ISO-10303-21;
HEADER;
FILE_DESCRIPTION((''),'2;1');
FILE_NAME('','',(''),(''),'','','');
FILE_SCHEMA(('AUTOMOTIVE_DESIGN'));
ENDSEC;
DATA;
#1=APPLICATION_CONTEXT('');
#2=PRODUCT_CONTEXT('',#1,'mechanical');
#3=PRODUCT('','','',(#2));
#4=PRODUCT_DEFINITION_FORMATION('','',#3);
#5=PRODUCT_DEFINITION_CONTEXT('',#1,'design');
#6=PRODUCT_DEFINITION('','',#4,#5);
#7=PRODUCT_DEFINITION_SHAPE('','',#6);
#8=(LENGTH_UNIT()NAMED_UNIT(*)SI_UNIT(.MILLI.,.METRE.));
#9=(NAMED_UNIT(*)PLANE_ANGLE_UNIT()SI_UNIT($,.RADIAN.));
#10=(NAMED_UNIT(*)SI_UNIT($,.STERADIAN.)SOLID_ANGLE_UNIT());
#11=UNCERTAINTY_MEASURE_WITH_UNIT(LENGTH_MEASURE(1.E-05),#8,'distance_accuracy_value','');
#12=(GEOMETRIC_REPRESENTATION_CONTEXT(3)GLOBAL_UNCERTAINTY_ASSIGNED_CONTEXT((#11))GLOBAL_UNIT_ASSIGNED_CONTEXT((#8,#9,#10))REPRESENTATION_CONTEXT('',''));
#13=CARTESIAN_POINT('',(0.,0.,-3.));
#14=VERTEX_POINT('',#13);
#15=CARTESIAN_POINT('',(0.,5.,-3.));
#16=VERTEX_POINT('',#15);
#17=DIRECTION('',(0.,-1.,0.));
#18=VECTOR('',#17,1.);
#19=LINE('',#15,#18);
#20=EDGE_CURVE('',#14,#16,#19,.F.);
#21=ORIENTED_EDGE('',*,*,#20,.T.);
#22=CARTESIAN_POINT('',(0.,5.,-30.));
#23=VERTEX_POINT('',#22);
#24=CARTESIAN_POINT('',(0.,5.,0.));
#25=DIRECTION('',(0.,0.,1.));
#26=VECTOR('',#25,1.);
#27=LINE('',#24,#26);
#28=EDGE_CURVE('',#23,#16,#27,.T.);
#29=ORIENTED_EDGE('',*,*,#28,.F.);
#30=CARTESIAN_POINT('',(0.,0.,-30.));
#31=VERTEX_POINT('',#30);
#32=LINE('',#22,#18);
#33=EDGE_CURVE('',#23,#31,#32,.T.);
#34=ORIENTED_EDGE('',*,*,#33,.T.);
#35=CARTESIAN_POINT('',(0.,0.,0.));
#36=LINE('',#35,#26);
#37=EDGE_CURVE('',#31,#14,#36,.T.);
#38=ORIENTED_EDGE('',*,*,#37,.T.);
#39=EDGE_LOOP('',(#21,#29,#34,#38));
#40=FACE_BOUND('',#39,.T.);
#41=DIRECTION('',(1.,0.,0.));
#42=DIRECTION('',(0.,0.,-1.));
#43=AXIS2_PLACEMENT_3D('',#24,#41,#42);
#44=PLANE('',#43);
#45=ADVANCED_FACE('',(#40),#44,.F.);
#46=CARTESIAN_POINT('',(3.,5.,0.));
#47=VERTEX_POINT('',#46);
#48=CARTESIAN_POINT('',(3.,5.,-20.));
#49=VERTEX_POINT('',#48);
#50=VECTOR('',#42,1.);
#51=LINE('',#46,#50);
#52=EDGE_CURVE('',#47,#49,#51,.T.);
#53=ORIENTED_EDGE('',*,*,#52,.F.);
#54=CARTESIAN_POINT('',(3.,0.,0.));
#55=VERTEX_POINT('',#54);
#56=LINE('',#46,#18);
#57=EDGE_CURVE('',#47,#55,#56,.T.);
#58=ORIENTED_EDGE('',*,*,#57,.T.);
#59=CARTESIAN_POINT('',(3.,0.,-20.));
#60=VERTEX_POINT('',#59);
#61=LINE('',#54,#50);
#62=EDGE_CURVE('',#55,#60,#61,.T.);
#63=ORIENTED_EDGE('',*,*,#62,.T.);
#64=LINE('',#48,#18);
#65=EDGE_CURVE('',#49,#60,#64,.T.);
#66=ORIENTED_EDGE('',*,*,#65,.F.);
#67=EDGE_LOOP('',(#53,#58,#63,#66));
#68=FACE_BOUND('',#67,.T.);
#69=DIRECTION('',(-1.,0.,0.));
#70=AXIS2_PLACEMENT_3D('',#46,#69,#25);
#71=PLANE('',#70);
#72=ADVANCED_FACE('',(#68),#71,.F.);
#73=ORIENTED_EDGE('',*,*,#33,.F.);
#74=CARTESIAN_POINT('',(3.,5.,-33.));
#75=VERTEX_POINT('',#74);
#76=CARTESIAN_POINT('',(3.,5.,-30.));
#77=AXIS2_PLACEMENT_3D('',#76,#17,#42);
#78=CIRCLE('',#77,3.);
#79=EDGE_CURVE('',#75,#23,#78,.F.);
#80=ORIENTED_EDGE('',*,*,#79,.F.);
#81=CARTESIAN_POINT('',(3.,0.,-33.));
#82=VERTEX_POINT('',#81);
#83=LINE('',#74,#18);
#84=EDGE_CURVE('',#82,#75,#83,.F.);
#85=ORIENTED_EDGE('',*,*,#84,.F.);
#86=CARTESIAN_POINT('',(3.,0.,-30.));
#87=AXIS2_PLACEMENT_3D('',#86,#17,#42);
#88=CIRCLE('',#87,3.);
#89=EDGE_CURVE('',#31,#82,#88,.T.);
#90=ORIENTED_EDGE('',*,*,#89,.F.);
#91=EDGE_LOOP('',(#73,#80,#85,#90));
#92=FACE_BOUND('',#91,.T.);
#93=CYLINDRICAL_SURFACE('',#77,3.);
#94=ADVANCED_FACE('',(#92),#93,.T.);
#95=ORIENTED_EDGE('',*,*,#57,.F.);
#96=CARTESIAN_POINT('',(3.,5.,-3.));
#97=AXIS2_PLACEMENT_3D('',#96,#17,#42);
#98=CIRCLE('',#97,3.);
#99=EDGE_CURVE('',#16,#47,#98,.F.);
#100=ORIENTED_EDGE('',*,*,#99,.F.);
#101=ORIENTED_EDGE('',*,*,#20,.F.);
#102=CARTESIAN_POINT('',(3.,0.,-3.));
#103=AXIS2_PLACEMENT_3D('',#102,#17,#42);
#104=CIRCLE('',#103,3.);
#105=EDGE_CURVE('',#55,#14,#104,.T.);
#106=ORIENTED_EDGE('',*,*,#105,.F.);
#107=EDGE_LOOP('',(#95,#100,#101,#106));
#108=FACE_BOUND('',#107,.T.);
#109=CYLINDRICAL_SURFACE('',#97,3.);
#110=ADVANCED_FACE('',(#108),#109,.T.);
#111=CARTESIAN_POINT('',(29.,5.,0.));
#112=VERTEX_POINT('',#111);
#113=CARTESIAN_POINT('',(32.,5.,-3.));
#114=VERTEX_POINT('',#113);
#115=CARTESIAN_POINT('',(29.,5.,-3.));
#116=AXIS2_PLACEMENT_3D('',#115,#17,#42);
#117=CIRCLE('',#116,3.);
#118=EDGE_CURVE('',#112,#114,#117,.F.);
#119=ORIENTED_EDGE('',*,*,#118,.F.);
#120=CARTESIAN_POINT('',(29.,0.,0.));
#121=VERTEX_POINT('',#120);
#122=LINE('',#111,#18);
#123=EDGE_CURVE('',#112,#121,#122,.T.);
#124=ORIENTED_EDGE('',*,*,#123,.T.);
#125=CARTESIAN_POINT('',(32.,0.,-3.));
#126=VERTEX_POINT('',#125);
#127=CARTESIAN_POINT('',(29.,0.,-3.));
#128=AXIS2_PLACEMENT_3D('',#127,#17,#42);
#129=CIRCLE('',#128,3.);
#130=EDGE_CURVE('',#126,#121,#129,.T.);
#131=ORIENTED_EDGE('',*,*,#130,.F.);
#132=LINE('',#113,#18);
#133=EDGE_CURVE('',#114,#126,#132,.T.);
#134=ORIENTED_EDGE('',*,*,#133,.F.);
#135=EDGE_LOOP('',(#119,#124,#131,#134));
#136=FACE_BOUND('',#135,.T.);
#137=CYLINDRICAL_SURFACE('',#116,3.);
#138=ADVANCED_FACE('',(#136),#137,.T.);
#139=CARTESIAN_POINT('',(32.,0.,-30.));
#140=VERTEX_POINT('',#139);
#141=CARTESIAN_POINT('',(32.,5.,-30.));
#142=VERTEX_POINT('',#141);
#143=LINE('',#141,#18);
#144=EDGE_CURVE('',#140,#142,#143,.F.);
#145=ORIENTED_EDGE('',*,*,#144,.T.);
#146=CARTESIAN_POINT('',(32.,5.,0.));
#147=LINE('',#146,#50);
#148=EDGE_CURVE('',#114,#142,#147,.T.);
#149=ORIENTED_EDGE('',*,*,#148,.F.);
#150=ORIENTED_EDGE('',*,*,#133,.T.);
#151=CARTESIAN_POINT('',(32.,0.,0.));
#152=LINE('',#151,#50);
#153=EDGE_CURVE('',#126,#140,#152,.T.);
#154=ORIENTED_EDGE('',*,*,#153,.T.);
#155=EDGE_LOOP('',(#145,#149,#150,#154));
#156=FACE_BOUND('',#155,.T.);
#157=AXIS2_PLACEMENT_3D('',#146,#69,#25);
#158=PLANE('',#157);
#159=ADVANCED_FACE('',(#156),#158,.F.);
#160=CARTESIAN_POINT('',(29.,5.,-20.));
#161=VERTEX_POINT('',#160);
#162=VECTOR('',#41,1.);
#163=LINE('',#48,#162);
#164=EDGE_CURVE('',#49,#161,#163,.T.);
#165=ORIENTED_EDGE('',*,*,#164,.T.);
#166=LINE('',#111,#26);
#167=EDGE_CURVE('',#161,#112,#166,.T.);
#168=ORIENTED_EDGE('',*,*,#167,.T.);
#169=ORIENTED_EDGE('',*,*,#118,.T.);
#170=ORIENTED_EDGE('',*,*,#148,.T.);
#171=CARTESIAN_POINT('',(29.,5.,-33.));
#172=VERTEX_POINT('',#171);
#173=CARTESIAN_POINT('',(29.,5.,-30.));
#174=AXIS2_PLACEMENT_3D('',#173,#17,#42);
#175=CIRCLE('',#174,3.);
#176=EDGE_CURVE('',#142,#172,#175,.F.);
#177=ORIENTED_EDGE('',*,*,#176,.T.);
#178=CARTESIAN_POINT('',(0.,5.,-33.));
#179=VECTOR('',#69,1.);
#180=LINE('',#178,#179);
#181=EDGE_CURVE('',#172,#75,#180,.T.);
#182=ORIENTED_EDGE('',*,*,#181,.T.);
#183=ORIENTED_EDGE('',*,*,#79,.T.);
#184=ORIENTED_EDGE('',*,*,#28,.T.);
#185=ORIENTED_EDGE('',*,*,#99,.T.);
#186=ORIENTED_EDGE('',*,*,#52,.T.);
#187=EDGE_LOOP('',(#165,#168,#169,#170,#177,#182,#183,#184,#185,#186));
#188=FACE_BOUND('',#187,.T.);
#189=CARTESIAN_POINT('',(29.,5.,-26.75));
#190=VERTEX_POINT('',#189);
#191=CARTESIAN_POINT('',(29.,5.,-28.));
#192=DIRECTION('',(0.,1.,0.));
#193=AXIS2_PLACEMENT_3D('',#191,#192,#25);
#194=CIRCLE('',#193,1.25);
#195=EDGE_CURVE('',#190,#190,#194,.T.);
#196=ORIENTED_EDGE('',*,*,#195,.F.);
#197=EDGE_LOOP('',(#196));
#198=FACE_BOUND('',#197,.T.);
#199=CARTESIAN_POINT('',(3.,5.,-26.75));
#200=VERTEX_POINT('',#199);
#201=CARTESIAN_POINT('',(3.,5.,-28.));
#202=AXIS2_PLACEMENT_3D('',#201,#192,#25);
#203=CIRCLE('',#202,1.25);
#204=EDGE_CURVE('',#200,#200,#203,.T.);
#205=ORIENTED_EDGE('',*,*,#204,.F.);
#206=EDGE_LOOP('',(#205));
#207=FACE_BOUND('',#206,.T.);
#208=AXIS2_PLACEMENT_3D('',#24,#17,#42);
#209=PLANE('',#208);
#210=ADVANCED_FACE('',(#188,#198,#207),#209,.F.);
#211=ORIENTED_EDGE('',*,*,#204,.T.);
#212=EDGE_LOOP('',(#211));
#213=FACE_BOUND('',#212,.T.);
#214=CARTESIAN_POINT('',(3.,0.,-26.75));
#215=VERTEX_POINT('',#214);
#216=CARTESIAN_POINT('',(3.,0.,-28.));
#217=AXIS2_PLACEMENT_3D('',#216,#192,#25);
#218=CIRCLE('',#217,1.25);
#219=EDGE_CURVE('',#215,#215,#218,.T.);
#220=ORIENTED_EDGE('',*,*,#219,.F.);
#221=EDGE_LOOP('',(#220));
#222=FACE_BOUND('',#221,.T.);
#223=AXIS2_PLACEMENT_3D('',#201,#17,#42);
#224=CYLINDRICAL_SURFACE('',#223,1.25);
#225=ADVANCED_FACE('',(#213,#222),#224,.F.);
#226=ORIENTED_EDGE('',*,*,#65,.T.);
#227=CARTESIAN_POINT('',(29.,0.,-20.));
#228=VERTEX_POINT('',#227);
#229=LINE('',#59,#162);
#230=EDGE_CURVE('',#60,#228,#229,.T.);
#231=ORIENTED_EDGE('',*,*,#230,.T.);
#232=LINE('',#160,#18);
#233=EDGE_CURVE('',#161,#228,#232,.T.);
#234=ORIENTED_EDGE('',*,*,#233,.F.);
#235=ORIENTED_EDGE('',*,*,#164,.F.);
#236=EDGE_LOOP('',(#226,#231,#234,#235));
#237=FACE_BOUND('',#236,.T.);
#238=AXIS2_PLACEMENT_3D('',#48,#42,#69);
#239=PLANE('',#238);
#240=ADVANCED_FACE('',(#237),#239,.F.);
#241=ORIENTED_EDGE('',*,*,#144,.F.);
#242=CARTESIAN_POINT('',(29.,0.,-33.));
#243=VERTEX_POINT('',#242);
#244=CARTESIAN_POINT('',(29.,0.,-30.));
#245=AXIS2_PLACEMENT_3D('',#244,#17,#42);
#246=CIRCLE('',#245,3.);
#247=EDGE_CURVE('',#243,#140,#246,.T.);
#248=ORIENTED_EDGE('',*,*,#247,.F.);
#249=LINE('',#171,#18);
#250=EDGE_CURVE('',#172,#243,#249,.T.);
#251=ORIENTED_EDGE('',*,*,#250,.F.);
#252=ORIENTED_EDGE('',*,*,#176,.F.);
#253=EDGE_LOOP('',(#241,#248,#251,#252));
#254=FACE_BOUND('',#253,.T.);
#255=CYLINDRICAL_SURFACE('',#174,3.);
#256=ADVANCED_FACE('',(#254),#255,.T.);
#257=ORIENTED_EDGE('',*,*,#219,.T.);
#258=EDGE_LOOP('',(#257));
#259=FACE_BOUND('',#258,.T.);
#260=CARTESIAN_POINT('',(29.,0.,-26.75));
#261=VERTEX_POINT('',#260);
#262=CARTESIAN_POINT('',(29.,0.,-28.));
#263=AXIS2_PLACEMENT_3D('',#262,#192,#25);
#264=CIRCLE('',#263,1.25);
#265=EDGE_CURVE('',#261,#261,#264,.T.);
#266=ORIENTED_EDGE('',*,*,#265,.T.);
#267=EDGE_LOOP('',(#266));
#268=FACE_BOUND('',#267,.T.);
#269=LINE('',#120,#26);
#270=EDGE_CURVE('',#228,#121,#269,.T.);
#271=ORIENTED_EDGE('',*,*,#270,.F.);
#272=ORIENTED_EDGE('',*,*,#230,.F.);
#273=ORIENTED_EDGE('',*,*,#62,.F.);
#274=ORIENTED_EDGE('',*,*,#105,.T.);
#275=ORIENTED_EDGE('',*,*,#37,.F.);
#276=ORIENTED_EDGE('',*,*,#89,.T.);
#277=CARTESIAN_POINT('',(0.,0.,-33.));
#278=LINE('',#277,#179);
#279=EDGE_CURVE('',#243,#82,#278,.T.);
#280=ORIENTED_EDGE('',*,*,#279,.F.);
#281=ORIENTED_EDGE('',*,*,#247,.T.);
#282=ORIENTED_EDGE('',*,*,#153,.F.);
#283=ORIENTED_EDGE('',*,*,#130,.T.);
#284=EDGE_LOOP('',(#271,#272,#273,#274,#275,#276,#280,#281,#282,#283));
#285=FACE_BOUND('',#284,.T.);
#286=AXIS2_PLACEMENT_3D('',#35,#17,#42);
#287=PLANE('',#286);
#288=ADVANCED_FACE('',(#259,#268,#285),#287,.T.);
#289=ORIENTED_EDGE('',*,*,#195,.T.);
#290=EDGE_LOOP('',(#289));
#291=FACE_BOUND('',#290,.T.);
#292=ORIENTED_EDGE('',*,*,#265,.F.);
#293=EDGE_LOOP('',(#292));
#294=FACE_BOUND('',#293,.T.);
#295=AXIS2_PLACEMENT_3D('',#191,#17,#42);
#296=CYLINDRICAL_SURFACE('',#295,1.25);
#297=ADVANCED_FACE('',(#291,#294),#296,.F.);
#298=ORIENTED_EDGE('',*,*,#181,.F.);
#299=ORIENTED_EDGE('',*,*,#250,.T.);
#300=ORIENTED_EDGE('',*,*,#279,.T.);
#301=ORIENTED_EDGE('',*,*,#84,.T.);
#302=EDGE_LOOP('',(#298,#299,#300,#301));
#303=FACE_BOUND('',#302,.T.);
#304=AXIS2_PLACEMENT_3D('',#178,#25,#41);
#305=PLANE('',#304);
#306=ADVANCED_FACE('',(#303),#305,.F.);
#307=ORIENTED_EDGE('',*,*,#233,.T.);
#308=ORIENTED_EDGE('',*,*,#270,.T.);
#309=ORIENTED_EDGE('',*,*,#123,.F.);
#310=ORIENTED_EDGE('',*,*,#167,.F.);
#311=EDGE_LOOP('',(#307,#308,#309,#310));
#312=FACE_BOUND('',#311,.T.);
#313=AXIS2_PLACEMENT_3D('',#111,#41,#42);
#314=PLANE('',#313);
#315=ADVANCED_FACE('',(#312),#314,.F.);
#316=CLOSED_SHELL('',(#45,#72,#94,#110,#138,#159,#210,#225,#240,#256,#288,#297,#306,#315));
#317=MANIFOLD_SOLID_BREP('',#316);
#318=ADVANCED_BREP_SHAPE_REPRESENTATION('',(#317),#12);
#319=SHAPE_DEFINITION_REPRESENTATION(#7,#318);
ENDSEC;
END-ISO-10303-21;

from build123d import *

# Parameters (mm, degrees)
SKETCH1_R           = 1.25
BOSS_EXTRUDE1_DEPTH = 5
FILLET1_R           = 3


with BuildPart() as part:
    # Sketch1 → Boss-Extrude1 (new body)
    with BuildSketch(Plane(origin=(0, 0, 0), x_dir=(1, 0, 0), z_dir=(0, 1, 0))):
        Polygon((29, 0), (32, 0), (32, 33), (0, 33), (0, 0), (3, 0), (3, 20), (29, 20), align=None)
        with Locations(Location((3, 28, 0), (0, 0, 270))):
            Circle(SKETCH1_R, mode=Mode.SUBTRACT)
        with Locations(Location((29, 28, 0), (0, 0, 270))):
            Circle(SKETCH1_R, mode=Mode.SUBTRACT)
    extrude(amount=BOSS_EXTRUDE1_DEPTH)

    # Fillet1
    fillet1_edges = [part.edges().sort_by_distance(p)[0] for p in [
        (0, 2.5, -33),
        (32, 2.5, -33),
        (32, 2.5, 0),
        (0, 2.5, 0),
    ]]
    fillet(fillet1_edges, radius=FILLET1_R - 0.0001)  # a hair under: the kernel refuses the full size


solid = part.part
